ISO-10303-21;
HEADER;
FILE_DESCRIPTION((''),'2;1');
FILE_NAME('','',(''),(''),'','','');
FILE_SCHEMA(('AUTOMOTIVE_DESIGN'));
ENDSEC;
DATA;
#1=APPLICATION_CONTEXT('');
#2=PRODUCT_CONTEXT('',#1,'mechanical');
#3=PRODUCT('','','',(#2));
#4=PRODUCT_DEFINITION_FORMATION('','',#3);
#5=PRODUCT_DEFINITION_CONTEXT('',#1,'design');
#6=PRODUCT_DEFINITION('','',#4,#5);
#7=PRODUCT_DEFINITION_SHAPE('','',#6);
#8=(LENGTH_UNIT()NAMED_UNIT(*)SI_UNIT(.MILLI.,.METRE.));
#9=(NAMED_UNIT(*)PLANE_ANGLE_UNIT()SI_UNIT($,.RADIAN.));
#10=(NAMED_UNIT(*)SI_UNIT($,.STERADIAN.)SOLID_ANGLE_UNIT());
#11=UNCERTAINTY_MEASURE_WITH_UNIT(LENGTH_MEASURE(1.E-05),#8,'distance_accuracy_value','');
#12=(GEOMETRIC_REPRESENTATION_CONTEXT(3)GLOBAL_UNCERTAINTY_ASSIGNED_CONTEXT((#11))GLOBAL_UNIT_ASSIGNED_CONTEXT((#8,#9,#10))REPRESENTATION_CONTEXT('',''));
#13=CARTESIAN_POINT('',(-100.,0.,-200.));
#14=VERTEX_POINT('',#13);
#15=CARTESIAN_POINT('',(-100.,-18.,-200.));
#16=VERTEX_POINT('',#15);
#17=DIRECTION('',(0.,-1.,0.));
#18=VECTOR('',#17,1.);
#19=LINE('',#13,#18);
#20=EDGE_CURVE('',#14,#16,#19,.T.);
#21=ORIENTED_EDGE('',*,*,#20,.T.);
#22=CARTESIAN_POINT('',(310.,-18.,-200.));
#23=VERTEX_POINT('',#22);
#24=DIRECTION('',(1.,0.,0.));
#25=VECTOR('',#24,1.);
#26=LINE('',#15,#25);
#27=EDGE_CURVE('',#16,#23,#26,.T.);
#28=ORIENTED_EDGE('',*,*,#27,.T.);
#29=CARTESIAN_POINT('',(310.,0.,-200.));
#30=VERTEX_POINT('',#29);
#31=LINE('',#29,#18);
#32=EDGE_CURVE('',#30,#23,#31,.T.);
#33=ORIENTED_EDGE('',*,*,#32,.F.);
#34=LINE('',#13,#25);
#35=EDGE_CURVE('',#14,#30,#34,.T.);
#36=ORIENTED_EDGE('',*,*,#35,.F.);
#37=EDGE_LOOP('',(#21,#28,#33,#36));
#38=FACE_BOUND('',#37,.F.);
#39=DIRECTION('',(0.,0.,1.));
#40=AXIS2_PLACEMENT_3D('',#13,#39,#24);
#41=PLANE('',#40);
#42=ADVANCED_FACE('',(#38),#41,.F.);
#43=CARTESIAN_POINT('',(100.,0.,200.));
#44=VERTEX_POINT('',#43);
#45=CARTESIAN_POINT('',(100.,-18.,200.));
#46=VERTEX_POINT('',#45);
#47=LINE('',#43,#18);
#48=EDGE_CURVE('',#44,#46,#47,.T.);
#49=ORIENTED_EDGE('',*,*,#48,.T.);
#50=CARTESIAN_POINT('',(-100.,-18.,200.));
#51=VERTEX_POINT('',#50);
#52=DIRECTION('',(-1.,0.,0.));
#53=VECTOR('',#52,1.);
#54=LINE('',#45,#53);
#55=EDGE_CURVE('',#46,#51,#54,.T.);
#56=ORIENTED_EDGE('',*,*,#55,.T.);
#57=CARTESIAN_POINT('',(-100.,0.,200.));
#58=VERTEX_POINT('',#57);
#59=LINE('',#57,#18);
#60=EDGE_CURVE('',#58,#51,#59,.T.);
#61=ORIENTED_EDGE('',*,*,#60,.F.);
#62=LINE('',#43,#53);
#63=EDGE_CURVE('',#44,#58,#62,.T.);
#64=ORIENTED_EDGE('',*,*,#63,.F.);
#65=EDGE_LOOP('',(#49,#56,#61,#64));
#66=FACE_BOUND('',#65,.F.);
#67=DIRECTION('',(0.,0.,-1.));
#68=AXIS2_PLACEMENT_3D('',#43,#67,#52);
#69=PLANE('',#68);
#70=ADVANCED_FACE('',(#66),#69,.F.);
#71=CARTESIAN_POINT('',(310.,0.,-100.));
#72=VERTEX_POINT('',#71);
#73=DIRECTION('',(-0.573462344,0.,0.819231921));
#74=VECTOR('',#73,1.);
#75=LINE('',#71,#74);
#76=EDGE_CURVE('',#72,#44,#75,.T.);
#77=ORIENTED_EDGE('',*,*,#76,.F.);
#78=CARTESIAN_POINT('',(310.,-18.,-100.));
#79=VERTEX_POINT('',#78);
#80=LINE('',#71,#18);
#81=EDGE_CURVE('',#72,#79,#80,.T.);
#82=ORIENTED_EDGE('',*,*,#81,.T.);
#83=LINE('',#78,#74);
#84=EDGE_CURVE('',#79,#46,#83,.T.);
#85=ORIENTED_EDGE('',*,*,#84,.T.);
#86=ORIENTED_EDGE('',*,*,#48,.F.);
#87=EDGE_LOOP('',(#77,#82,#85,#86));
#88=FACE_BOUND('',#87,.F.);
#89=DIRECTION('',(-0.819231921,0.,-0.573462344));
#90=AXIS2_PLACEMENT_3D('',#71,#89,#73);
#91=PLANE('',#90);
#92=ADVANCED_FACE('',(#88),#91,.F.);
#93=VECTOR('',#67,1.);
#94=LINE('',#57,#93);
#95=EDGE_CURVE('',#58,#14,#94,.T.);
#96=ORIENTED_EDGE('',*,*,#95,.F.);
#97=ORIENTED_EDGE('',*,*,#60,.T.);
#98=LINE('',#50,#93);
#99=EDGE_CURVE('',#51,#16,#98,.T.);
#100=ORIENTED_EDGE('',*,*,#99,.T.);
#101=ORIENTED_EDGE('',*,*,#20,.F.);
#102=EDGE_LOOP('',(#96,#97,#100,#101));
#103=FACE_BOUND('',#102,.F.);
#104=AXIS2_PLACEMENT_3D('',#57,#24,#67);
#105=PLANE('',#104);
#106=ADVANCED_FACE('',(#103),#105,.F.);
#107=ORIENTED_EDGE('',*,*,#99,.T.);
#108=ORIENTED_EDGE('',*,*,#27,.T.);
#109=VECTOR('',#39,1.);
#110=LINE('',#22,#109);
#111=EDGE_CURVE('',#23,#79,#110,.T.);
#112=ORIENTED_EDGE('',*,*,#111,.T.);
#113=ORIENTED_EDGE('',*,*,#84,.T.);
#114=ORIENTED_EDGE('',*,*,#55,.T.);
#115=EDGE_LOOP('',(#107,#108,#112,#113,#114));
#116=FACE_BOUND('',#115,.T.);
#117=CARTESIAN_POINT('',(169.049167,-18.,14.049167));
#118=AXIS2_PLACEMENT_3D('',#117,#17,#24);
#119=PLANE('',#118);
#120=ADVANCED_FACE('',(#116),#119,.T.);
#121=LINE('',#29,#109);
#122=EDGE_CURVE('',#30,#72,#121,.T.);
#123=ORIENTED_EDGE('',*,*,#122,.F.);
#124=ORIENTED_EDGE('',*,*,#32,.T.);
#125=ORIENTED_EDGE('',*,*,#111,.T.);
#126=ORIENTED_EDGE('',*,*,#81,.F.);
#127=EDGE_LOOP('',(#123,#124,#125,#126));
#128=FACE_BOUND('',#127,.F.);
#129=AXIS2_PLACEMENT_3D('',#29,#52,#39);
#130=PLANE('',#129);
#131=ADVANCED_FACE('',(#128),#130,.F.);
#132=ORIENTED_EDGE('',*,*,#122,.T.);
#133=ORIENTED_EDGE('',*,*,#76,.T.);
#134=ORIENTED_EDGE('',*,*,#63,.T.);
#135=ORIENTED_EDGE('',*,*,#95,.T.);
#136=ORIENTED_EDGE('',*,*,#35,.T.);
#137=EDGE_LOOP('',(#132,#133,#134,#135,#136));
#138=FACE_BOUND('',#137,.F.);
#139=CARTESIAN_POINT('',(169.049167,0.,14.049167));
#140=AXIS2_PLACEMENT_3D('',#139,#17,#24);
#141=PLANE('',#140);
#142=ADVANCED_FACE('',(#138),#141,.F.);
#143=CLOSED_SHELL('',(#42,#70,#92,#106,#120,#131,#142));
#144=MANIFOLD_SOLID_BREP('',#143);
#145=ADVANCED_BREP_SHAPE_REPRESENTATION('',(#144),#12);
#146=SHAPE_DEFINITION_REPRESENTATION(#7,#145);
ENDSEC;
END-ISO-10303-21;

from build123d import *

# Parameters (mm, degrees)
F1_DEPTH = 18


# Not quite as in the source:
# - a feature names something its author has since deleted; it is built from what else it names


with BuildPart() as f1:
    # F0 (on Front) → F1 (new body)
    with BuildSketch(Plane.XZ):
        Polygon((310, -100), (100, 200), (100, -100), align=None)
        Polygon((-100, 200), (-100, -200), (100, -200), (310, -200), (310, -100), (100, -100), (100, 200), align=None)
    extrude(amount=F1_DEPTH)


solid = f1.part
